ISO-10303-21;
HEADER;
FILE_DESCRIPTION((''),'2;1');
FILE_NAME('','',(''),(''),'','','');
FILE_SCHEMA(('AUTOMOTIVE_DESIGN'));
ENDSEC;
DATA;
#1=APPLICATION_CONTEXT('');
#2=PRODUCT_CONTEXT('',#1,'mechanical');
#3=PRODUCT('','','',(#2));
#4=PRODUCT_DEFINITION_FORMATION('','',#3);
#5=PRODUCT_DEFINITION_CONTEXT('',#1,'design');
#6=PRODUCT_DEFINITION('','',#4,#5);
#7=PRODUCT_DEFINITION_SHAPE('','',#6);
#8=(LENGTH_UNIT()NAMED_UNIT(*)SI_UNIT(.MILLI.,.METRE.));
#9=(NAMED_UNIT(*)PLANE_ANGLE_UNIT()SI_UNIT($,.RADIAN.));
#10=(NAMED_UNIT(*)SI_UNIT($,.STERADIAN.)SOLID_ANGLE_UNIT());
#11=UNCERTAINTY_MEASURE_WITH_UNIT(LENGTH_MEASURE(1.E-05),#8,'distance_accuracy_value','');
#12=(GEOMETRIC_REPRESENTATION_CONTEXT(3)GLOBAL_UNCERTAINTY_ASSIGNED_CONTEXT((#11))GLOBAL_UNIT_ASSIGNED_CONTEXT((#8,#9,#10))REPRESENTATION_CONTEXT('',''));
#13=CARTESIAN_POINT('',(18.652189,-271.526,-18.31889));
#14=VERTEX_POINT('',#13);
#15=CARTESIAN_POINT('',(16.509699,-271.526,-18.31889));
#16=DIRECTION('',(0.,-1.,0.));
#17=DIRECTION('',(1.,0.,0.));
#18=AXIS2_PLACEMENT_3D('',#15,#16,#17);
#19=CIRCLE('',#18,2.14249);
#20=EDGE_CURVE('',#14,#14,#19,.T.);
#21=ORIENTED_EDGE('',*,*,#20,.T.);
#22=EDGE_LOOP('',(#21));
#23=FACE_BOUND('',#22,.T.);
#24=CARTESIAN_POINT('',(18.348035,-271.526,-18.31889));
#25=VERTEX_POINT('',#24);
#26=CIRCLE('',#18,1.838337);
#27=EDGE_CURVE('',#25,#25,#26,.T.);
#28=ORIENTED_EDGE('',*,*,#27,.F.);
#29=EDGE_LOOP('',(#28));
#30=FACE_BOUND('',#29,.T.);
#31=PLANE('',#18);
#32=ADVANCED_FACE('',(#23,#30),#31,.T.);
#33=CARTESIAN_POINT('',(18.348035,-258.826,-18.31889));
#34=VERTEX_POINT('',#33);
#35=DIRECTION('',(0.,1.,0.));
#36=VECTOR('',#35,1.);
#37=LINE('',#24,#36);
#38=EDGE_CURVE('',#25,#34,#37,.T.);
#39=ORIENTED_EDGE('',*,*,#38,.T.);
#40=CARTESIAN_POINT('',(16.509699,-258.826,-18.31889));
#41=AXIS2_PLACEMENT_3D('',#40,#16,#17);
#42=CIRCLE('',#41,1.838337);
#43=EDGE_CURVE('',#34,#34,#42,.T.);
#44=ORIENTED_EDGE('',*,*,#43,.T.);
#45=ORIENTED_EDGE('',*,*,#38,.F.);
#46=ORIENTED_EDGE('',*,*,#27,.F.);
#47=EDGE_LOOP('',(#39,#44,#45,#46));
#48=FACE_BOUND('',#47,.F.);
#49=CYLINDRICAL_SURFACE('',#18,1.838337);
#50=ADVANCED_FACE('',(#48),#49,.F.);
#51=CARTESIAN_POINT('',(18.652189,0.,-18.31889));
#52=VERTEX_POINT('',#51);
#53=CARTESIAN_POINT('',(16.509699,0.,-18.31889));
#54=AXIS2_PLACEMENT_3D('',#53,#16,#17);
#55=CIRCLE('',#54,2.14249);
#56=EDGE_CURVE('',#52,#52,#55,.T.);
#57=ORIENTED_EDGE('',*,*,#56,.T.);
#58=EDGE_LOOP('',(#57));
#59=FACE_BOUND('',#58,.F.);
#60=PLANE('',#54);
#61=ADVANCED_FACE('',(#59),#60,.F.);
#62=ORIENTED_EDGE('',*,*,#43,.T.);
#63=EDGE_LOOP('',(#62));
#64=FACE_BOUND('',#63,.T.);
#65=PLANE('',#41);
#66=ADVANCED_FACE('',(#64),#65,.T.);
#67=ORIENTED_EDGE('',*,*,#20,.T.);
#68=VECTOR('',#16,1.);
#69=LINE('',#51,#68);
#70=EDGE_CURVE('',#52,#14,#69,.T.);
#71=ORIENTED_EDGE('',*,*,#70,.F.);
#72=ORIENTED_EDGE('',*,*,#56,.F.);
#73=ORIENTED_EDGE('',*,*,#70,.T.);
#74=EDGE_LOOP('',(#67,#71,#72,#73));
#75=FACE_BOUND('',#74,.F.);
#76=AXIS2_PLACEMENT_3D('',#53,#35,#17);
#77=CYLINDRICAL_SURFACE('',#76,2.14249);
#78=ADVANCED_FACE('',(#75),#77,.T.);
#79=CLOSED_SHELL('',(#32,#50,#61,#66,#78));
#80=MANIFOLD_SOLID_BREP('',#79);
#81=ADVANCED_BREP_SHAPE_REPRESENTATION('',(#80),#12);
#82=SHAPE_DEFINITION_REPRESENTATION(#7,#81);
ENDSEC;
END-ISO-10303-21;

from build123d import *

# Parameters (mm, degrees)
F0_R     = 2.14249
F1_DEPTH = 271.526
F2_R     = 1.8383366591
F3_DEPTH = 12.7


# Not quite as in the source:
# - the program builds the solid bodies; features that only make, move or delete a surface that nothing else refers to are left out


with BuildPart() as f1:
    # F0 (on Front) → F1 (new body)
    with BuildSketch(Plane.XZ):
        with Locations((16.5096987039, -18.3188896626)):
            Circle(F0_R)
    extrude(amount=F1_DEPTH)

    # F2 (on face) → F3 (cut)
    with BuildSketch(Plane.XZ.offset(271.526)):
        with Locations((16.5096987039, -18.3188896626)):
            Circle(F2_R)
    extrude(amount=-F3_DEPTH, mode=Mode.SUBTRACT)


solid = f1.part
